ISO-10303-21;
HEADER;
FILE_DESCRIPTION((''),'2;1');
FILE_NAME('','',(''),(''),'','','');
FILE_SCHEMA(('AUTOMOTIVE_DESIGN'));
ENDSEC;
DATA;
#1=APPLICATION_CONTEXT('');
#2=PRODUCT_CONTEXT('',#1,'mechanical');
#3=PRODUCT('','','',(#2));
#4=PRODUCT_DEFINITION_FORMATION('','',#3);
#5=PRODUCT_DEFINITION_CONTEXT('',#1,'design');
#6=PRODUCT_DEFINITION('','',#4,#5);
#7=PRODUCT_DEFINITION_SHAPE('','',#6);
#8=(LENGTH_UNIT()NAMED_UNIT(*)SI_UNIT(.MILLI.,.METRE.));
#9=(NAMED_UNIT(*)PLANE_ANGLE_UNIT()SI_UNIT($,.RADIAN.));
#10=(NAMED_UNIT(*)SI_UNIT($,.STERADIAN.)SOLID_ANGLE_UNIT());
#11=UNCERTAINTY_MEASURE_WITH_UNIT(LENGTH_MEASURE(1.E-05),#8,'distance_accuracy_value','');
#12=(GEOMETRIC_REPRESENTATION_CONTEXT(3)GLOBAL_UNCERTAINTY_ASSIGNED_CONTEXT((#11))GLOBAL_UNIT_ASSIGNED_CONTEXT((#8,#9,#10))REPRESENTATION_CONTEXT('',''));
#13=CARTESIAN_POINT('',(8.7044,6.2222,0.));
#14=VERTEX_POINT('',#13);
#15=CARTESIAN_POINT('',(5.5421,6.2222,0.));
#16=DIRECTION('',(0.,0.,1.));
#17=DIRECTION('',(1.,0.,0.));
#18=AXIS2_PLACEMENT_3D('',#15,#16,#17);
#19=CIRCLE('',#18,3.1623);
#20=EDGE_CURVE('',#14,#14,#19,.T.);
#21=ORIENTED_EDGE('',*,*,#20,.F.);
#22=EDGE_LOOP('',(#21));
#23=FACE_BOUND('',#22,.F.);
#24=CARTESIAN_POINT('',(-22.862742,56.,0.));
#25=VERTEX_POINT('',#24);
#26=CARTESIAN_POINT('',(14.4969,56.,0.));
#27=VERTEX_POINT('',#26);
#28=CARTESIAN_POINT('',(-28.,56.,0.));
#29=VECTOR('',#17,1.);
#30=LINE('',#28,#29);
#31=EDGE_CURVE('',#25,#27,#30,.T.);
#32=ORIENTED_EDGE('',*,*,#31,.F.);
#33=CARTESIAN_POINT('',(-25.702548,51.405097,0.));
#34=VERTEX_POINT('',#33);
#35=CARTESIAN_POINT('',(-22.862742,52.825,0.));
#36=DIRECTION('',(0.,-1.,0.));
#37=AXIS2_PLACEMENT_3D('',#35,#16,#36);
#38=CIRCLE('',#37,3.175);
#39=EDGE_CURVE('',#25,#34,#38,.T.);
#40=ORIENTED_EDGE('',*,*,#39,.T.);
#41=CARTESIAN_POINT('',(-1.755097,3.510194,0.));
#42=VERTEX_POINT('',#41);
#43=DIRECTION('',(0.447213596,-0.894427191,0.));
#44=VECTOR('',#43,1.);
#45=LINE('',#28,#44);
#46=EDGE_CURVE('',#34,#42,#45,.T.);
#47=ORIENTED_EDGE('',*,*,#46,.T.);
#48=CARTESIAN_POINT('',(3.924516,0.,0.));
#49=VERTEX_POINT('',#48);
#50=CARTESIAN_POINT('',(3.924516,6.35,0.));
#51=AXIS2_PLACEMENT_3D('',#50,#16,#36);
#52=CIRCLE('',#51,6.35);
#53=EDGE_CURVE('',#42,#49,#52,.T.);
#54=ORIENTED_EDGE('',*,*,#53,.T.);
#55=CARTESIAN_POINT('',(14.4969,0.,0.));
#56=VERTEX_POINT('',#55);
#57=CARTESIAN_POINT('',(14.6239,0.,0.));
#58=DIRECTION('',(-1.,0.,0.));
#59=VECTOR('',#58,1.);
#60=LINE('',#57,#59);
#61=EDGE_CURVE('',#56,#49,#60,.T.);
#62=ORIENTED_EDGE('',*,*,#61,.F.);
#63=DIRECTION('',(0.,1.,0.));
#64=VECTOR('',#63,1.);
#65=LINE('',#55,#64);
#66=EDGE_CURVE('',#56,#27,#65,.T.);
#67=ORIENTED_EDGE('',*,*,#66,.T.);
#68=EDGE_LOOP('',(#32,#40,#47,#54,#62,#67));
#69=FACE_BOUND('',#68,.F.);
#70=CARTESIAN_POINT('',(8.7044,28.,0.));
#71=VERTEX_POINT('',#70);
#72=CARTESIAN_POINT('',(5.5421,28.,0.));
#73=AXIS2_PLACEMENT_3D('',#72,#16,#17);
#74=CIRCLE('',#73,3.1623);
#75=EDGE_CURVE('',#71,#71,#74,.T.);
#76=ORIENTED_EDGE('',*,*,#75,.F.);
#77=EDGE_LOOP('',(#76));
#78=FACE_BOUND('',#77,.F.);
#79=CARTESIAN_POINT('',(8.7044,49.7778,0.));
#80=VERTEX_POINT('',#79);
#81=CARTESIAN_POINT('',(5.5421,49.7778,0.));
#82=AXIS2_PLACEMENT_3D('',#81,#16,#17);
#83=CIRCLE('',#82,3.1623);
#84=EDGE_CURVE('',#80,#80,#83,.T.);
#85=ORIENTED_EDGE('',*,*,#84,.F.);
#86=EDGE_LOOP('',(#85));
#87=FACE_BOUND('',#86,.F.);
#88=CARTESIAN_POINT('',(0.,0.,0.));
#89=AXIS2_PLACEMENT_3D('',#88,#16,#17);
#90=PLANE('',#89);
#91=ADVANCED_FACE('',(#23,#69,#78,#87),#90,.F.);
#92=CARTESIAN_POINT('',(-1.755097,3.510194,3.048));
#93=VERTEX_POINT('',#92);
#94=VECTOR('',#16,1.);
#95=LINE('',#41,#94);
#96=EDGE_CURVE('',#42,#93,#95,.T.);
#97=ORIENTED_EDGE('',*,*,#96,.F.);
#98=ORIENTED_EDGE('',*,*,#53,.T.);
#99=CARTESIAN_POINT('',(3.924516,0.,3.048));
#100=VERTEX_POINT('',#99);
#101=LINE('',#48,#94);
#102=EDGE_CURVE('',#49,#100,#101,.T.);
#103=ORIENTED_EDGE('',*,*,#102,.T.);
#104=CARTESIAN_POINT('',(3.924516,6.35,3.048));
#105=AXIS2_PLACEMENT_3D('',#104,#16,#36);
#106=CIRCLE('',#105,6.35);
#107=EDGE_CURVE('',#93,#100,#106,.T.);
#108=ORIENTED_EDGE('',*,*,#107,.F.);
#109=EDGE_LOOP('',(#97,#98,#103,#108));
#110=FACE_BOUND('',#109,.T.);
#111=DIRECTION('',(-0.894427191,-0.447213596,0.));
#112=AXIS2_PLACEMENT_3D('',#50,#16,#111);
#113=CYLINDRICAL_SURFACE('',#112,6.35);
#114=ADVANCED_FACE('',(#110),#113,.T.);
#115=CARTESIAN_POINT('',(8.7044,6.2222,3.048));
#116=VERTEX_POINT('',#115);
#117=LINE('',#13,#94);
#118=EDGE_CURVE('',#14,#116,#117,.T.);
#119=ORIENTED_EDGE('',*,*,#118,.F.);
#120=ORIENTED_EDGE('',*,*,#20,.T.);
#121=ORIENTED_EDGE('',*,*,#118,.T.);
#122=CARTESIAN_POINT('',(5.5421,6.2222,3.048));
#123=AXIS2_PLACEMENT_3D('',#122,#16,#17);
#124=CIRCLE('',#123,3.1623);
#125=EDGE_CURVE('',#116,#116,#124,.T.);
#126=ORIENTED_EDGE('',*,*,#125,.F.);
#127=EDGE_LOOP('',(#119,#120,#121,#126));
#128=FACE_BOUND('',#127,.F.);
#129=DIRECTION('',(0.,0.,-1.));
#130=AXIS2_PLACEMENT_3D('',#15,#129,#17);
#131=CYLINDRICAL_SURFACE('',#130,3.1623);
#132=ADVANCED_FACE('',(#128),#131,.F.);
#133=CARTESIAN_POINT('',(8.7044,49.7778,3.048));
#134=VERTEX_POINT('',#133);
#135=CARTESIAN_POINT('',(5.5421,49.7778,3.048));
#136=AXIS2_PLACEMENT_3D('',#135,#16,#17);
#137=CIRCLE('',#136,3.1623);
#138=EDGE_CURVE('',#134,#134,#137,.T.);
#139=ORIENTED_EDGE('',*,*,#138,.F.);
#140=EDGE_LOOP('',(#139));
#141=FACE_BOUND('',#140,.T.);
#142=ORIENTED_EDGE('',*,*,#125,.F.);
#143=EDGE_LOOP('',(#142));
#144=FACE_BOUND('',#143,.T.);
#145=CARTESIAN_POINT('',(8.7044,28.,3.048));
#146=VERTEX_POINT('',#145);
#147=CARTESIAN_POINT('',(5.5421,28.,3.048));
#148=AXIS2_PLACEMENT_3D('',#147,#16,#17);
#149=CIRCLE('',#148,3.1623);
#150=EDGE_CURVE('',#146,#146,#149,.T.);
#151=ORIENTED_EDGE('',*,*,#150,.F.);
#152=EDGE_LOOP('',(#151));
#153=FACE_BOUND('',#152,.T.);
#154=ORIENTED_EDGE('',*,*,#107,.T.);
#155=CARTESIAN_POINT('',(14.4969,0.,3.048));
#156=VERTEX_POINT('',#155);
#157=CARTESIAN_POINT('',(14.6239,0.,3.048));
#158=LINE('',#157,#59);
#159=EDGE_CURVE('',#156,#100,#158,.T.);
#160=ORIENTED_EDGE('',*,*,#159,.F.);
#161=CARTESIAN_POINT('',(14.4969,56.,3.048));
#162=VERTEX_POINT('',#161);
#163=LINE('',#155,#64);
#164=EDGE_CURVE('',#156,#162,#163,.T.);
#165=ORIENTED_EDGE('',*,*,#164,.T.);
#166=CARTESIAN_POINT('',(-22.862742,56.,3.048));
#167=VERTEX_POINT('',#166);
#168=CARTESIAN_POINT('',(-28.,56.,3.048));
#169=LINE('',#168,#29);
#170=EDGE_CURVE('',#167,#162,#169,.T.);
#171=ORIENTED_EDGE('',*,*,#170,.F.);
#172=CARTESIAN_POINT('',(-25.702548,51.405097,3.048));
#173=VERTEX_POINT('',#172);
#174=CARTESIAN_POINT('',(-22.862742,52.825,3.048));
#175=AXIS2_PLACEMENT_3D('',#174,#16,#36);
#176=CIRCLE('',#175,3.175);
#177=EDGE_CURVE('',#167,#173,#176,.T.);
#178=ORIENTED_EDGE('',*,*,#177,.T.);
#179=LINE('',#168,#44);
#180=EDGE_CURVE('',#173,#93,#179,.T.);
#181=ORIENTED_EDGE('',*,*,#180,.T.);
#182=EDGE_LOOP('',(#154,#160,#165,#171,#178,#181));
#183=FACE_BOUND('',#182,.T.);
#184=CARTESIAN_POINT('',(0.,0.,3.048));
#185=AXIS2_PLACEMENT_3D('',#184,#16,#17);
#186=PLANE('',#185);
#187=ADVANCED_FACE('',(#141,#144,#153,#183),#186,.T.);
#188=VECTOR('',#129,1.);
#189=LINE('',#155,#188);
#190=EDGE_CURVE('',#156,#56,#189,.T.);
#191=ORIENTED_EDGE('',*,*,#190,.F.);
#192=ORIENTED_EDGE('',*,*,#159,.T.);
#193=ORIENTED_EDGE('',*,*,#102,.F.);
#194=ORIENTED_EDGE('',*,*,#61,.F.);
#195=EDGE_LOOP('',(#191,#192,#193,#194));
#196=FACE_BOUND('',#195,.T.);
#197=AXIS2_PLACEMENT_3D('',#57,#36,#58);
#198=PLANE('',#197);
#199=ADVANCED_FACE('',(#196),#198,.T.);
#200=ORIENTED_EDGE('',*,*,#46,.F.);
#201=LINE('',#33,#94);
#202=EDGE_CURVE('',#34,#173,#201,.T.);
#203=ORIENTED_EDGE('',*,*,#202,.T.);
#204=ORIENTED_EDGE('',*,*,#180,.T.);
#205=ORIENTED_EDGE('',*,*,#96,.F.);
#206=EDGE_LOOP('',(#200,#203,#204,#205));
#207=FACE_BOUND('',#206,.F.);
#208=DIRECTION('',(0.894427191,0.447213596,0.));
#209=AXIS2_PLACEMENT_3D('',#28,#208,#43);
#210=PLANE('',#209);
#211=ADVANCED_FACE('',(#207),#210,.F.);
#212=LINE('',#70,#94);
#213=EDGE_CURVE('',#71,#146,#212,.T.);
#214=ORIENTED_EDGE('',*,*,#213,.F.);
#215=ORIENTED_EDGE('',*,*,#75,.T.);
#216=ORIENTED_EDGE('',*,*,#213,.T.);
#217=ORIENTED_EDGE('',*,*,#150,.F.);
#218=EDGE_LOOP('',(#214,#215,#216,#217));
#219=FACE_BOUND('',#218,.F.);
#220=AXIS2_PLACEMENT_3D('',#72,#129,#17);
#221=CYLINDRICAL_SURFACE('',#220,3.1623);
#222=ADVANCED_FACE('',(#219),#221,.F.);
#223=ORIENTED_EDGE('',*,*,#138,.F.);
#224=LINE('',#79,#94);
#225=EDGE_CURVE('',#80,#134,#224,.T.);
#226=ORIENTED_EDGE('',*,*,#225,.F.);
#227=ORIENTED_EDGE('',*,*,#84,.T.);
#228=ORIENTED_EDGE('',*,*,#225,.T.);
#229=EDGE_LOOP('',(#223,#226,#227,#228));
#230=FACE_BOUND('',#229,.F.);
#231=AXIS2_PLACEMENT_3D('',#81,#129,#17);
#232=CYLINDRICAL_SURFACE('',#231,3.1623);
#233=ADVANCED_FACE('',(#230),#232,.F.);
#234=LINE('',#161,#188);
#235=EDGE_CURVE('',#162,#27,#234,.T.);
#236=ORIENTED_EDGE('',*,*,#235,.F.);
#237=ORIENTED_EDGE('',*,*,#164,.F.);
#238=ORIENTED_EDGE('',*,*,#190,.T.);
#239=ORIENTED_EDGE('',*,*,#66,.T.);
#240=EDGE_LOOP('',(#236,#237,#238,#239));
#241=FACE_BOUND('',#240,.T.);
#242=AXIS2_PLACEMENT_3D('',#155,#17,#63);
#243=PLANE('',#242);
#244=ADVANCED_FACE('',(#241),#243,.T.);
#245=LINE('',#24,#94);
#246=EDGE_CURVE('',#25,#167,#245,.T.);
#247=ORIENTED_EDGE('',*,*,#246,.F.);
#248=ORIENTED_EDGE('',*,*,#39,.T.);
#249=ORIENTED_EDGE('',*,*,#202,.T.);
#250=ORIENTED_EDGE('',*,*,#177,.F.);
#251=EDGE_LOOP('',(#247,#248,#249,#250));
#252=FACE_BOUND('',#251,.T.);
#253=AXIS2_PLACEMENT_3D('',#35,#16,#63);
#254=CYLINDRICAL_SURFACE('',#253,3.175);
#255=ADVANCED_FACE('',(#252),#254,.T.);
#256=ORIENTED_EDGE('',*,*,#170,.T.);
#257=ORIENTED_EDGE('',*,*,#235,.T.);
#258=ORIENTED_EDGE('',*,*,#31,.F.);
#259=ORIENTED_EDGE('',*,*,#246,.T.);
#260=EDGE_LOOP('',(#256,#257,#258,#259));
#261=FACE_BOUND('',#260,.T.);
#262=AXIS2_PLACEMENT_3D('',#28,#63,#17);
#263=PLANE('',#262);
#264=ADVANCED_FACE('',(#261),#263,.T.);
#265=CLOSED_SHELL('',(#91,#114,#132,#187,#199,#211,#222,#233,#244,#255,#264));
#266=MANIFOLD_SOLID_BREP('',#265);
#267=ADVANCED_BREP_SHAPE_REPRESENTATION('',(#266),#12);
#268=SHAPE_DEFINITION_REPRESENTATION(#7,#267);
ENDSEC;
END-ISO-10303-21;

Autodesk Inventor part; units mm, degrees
ref_plane "YZ Plane" through (0, 0, 0) normal (1, 0, 0) x (0, 1, 0)
ref_plane "XZ Plane" through (0, 0, 0) normal (0, 1, 0) x (-1, 0, 0)
ref_plane "XY Plane" through (0, 0, 0) normal (0, 0, 1) x (1, 0, 0)
sketch "Sketch1" plane through (0, 0, 0) normal (0, 0, 1) x (1, 0, 0)
  line L0 (-50.8, 101.6) -> (101.6, 101.6)
  line L1 (50.8, 0) -> (101.6, 101.6)
  line L2 (-28, 56) -> (0, 0)
  line L3 (14.6239, 7) -> (34.6239, 7)
  line L4 (34.6239, 7) -> (34.6239, 2)
  line L5 (34.6239, 2) -> (14.6239, 2)
  line L6 (14.6239, 2) -> (14.6239, 7)
  line L7 (50.8, 0) -> (50.8, 62.4863)
  line L8 (14.6239, 14) -> (34.6239, 14)
  line L9 (34.6239, 14) -> (34.6239, 9)
  line L10 (34.6239, 9) -> (14.6239, 9)
  line L11 (14.6239, 9) -> (14.6239, 14)
  line L12 (14.6239, 21) -> (34.6239, 21)
  line L13 (34.6239, 21) -> (34.6239, 16)
  line L14 (34.6239, 16) -> (14.6239, 16)
  line L15 (14.6239, 16) -> (14.6239, 21)
  line L16 (14.6239, 28) -> (34.6239, 28)
  line L17 (34.6239, 28) -> (34.6239, 23)
  line L18 (34.6239, 23) -> (14.6239, 23)
  line L19 (14.6239, 23) -> (14.6239, 28)
  line L20 (14.6239, 35) -> (34.6239, 35)
  line L21 (34.6239, 35) -> (34.6239, 30)
  line L22 (34.6239, 30) -> (14.6239, 30)
  line L23 (14.6239, 30) -> (14.6239, 35)
  line L24 (14.6239, 42) -> (34.6239, 42)
  line L25 (34.6239, 42) -> (34.6239, 37)
  line L26 (34.6239, 37) -> (14.6239, 37)
  line L27 (14.6239, 37) -> (14.6239, 42)
  circle A0 centre (43.7057, 6.2222) radius 3.1623
  circle A1 centre (43.7057, 28) radius 3.1623
  circle A2 centre (43.7057, 49.7778) radius 3.1623
  line L28 (24.6239, 0) -> (24.6239, -15.6085)
  circle A3 centre (5.5421, 49.7778) radius 3.1623
  circle A4 centre (5.5421, 6.2222) radius 3.1623
  circle A5 centre (5.5421, 28) radius 3.1623
  line L29 (34.6239, 44) -> (14.6239, 44)
  line L30 (14.6239, 44) -> (14.6239, 49)
  line L31 (34.6239, 49) -> (34.6239, 44)
  line L32 (14.6239, 49) -> (34.6239, 49)
  line L33 (34.6239, 51) -> (14.6239, 51)
  line L34 (14.6239, 51) -> (14.6239, 56)
  line L35 (14.6239, 56) -> (34.6239, 56)
  line L36 (34.6239, 56) -> (34.6239, 51)
  circle A6 centre (-34.29, 91.44) radius 3.1623
  circle A7 centre (85.09, 91.44) radius 3.1623
  line L37 (14.6239, 0) -> (-28, 0)
  line L38 (-28, 0) -> (-28, 56)
  line L39 (-28, 56) -> (14.6239, 56)
  line L40 (14.6239, 56) -> (14.6239, 0)
  line L41 (-28, 56) -> (0, 0)
  line L42 (-28, 56) -> (14.6239, 56)
  line L43 (14.6239, 56) -> (14.6239, 0)
  line L44 (14.6239, 0) -> (0, 0)
  line L45 (0, 0) -> (14.6239, 0)
  line L46 (34.6239, 0) -> (50.8, 0)
  dimension "d8" = 50.8
  dimension "d9" = 152.4
  dimension "d11" = 50.8
  dimension "d12" = 20
  dimension "d13" = 5
  dimension "d15" = 7
  dimension "d16" = 6.3246
  dimension "d17" = 6.3246
  dimension "d18" = 6.3246
  dimension "d19" = 14
  dimension "d21" = 6.2222
  dimension "d24" = 6.3246
  dimension "d25" = 6.3246
  dimension "d26" = 34.29
  dimension "d27" = 34.29
  dimension "d28" = 10.16
  dimension "d29" = 10.16
  dimension "d40" = 9.0818
  dimension "d41" = 9.0818
  dimension "d42" = 9.0818
  dimension "d43" = 9.0818
  dimension "d44" = 9.0818
  dimension "d45" = 9.0818
  dimension "d46" = 26.1761
extrude "Plate1" add sketch "Sketch1" along normal blind 3.048 contours L39 L34 L40 L30 L27 L23 L19 L15 L11 L6 L37 L2
sketch "Sketch2" plane through (0, 0, 3.048) normal (0, 0, 1) x (1, 0, 0)
  line L0 (14.6239, 56) -> (14.6239, 0) projected
  line L1 (-28, 56) -> (14.6239, 56) projected
  line L2 (14.6239, 0) -> (14.4969, 0)
  line L3 (14.4969, 0) -> (14.4969, 56)
  line L4 (14.4969, 56) -> (14.6239, 56)
  line L5 (14.6239, 56) -> (14.6239, 0)
  dimension "d33" = 0.127
extrude "Cut1" cut sketch "Sketch2" against normal blind 3.048
fillet "Corner Round1" radius 6.35 1 edges at (0, 0, 1.524)
fillet "Corner Round1" radius 3.175 1 edges at (-28, 56, 1.524)
equation "\"d17\" = d16"
equation "\"d18\" = d17"
equation "\"d21\" = 0.111111 * d20"
equation "\"d27\" = d26"
equation "\"d29\" = d28"
equation "\"d41\" = d40"
equation "\"d42\" = d40"
equation "\"d43\" = d42"
equation "\"d34\" = Thickness"
equation "\"BendRadius\" = Thickness"
equation "\"BendReliefWidth\" = Thickness"
equation "\"BendReliefDepth\" = 0.5 * Thickness"
equation "\"CornerReliefSize\" = 4 * Thickness"
equation "\"MinimumRemnant\" = 2 * Thickness"
equation "\"TransitionRadius\" = BendRadius"
equation "\"JacobiRadiusSize\" = BendRadius"
equation "\"GapSize\" = Thickness"
equation "\"d22\" = d21"
equation "\"d23\" = 0.5 * d20"
equation "\"d32\" = BendRadius"
equation "\"d20\" = 56"
equation "\"Thickness\" = 3.048"
properties part number "Belt plate mid"
